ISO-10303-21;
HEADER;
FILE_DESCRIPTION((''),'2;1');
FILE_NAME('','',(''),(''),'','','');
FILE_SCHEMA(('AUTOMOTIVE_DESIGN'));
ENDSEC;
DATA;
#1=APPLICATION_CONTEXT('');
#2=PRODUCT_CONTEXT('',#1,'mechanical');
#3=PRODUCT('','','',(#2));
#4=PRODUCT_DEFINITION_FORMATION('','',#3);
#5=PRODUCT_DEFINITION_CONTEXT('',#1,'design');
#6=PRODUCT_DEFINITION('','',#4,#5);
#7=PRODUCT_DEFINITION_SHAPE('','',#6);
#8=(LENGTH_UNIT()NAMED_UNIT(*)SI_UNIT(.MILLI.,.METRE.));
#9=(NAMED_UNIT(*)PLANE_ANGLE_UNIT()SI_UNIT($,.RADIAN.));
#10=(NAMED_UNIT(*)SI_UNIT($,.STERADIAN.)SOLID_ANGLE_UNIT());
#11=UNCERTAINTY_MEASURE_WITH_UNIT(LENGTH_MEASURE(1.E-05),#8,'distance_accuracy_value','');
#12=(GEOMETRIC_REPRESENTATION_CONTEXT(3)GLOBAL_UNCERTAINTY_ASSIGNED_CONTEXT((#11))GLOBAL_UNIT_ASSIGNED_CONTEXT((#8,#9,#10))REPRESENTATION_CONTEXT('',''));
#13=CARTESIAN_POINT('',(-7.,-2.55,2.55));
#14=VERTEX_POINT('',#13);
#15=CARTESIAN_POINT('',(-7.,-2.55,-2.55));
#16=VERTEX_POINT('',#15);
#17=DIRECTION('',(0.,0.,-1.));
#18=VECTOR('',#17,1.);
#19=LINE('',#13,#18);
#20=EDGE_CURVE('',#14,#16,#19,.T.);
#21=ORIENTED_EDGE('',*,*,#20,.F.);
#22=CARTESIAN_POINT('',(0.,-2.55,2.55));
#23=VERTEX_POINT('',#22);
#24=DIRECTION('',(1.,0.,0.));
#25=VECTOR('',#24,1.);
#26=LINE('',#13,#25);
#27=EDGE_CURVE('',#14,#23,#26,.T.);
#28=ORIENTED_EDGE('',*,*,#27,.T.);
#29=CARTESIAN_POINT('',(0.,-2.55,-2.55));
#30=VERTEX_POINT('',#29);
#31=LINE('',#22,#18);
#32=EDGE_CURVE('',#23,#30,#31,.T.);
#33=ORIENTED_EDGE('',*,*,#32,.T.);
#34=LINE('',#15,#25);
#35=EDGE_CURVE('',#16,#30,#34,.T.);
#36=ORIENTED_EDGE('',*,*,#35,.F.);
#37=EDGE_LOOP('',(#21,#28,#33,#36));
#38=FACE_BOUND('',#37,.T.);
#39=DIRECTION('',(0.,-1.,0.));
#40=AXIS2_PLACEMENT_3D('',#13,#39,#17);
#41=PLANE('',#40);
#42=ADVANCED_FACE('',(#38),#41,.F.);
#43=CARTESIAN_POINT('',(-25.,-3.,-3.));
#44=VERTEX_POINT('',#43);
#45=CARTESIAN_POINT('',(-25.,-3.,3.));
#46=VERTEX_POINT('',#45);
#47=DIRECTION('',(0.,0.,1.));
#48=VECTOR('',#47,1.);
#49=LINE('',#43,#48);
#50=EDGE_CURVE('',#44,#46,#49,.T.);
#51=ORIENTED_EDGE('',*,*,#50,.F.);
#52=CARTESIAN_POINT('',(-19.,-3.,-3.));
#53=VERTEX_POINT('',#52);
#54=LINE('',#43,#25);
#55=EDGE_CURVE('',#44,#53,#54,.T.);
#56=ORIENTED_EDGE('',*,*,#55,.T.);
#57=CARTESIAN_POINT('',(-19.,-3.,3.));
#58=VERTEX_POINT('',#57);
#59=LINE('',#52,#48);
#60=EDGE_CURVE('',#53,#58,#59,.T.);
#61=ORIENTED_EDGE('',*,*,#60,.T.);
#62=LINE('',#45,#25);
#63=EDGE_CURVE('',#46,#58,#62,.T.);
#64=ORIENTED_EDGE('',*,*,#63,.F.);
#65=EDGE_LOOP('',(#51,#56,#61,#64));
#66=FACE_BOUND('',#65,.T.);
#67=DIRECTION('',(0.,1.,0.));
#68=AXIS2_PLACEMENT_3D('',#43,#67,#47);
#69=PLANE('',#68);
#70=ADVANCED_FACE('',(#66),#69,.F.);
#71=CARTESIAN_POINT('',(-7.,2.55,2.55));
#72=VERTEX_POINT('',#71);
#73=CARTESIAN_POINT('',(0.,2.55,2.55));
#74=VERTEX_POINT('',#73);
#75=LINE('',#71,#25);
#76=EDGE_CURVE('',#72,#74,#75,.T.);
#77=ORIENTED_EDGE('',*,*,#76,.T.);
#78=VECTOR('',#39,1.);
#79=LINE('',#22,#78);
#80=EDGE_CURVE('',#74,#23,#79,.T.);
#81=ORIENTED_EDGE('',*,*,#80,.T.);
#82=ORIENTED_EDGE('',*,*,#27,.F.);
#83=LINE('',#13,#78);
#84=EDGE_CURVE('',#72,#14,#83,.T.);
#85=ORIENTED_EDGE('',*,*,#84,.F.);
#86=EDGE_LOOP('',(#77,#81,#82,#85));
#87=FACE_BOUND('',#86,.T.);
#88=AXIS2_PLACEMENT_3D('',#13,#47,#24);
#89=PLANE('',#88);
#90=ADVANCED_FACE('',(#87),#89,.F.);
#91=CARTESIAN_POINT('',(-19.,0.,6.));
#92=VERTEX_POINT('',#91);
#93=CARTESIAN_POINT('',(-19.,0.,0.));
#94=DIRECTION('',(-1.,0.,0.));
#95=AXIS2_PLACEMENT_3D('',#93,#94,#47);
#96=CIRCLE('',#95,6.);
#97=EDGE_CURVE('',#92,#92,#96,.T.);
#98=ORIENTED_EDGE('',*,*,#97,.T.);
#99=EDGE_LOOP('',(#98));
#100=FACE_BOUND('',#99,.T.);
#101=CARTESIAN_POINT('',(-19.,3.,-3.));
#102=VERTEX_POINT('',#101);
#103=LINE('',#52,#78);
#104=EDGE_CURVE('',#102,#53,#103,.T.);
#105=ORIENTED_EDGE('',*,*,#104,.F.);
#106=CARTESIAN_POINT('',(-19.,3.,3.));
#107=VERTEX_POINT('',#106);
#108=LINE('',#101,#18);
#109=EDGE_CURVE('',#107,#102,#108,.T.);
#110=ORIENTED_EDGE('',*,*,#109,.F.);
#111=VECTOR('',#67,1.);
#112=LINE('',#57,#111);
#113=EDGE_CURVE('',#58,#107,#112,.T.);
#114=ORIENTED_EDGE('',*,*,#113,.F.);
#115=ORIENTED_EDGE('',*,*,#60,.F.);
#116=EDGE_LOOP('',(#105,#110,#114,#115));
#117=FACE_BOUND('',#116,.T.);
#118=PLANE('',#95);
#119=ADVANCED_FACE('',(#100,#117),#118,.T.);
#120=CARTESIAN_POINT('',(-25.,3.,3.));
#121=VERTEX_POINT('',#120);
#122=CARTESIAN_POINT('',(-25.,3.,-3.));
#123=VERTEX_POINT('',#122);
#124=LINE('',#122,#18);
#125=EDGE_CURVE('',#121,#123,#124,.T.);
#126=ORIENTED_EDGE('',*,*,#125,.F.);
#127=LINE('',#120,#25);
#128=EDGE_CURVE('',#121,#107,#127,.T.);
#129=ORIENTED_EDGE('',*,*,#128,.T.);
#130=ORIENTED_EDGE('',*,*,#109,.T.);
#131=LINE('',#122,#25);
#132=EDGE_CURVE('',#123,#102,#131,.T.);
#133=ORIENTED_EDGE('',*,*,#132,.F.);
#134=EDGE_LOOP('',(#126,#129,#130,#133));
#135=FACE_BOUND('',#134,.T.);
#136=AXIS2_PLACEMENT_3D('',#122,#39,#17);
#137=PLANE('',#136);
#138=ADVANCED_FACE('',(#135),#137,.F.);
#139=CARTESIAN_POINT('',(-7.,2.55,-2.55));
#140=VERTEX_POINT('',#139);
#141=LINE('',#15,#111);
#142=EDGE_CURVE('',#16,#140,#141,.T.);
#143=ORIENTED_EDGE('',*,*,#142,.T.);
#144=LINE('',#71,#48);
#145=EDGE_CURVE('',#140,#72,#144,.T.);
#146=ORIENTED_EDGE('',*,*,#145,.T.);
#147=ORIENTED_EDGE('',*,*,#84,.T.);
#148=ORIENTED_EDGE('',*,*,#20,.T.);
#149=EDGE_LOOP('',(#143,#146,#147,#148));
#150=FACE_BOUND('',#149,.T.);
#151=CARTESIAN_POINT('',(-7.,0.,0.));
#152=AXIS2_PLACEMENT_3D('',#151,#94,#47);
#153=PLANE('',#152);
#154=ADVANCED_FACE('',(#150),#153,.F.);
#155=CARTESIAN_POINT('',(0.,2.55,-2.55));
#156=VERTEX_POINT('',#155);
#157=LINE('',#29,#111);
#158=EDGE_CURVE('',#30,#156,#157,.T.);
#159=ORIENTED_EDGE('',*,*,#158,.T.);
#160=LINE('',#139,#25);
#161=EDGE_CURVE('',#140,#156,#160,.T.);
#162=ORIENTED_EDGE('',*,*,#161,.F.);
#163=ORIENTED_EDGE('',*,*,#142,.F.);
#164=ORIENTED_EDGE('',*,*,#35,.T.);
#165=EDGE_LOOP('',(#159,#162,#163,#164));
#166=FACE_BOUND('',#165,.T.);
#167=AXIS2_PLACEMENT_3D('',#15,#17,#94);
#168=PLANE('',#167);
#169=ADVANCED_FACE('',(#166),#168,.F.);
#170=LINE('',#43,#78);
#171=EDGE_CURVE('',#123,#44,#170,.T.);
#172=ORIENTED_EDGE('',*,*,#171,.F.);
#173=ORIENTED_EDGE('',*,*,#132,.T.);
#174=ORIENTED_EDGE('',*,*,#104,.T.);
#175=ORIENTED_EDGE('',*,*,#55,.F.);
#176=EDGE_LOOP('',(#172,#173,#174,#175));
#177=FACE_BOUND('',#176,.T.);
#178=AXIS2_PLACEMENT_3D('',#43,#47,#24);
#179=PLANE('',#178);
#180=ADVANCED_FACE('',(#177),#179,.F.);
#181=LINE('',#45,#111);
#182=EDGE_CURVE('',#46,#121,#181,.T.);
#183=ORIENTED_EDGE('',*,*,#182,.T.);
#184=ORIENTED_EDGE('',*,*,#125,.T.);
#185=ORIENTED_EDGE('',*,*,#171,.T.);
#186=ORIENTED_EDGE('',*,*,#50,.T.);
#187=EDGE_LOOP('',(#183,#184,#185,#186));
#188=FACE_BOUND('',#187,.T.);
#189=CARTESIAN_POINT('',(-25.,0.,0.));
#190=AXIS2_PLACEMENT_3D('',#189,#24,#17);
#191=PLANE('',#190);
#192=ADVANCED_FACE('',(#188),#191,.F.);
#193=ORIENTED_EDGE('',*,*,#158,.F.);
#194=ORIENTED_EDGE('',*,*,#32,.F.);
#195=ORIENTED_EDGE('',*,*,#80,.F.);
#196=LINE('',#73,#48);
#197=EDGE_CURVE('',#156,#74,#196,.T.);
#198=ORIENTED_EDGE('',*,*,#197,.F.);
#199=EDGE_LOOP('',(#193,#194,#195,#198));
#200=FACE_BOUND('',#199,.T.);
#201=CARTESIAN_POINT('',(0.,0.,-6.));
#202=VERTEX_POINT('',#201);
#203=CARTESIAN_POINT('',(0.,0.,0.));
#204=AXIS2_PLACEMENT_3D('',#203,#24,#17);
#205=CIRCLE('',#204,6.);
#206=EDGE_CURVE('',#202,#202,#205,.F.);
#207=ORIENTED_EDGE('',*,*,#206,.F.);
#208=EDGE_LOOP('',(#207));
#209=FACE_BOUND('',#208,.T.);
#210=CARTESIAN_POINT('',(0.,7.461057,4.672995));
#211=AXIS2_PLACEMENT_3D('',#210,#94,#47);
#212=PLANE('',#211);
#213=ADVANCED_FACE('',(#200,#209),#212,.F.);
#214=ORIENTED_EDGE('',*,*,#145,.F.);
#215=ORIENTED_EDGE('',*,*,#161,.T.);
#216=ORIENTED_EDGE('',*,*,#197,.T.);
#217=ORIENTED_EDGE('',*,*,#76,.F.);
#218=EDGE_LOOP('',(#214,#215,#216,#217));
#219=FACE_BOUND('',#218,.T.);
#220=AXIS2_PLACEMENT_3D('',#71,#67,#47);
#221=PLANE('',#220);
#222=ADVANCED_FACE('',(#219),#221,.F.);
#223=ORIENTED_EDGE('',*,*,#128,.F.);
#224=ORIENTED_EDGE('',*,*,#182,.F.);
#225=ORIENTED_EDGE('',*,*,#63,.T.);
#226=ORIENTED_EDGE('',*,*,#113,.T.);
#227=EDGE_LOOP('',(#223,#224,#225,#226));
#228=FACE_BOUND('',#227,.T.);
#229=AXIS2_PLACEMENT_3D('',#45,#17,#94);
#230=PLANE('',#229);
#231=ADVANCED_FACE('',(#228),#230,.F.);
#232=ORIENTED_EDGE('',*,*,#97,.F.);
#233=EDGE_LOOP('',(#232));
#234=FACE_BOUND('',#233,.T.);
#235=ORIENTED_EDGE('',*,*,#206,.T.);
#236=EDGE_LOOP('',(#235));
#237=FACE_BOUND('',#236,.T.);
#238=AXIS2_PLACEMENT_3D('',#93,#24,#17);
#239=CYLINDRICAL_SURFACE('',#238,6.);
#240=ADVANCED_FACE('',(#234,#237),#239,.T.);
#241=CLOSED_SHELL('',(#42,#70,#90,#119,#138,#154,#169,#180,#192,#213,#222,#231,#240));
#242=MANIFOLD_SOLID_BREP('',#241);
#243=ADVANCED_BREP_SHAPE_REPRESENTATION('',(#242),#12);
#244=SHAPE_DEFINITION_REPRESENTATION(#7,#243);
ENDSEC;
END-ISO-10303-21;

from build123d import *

# Parameters (mm, degrees)
STOCK_STICK_1_START       = -19
STOCK_STICK_1_OUTLINE_R   = 6
STOCK_STICK_1_DEPTH       = 19
STOCK_STICK_1_START_2     = -25
STOCK_STICK_1_2_OUTLINE_W = 6
STOCK_STICK_1_2_OUTLINE_H = 6
STOCK_STICK_1_2_DEPTH     = 6
SKETCH1_W                 = 5.1
SKETCH1_H                 = 5.1
CUT_EXTRUDE1_DEPTH        = 7


# Read off the part's stored shape, not the designer's step: Stock-Stick-1
with BuildPart() as part:
    # Stock-Stick-1 outline → Stock-Stick-1 (new body)
    with BuildSketch(Plane.YZ.offset(STOCK_STICK_1_START)):
        Circle(STOCK_STICK_1_OUTLINE_R)
    extrude(amount=STOCK_STICK_1_DEPTH)

    # Stock-Stick-1 2 outline → Stock-Stick-1 2 (add)
    with BuildSketch(Plane.YZ.offset(STOCK_STICK_1_START_2)):
        Rectangle(STOCK_STICK_1_2_OUTLINE_W, STOCK_STICK_1_2_OUTLINE_H)
    extrude(amount=STOCK_STICK_1_2_DEPTH)

    # Sketch1 → Cut-Extrude1 (cut)
    with BuildSketch(Plane(origin=(0, 0, 0), x_dir=(0, 0, -1), z_dir=(1, 0, 0))):
        Rectangle(SKETCH1_W, SKETCH1_H)
    extrude(amount=-CUT_EXTRUDE1_DEPTH, mode=Mode.SUBTRACT)


solid = part.part
